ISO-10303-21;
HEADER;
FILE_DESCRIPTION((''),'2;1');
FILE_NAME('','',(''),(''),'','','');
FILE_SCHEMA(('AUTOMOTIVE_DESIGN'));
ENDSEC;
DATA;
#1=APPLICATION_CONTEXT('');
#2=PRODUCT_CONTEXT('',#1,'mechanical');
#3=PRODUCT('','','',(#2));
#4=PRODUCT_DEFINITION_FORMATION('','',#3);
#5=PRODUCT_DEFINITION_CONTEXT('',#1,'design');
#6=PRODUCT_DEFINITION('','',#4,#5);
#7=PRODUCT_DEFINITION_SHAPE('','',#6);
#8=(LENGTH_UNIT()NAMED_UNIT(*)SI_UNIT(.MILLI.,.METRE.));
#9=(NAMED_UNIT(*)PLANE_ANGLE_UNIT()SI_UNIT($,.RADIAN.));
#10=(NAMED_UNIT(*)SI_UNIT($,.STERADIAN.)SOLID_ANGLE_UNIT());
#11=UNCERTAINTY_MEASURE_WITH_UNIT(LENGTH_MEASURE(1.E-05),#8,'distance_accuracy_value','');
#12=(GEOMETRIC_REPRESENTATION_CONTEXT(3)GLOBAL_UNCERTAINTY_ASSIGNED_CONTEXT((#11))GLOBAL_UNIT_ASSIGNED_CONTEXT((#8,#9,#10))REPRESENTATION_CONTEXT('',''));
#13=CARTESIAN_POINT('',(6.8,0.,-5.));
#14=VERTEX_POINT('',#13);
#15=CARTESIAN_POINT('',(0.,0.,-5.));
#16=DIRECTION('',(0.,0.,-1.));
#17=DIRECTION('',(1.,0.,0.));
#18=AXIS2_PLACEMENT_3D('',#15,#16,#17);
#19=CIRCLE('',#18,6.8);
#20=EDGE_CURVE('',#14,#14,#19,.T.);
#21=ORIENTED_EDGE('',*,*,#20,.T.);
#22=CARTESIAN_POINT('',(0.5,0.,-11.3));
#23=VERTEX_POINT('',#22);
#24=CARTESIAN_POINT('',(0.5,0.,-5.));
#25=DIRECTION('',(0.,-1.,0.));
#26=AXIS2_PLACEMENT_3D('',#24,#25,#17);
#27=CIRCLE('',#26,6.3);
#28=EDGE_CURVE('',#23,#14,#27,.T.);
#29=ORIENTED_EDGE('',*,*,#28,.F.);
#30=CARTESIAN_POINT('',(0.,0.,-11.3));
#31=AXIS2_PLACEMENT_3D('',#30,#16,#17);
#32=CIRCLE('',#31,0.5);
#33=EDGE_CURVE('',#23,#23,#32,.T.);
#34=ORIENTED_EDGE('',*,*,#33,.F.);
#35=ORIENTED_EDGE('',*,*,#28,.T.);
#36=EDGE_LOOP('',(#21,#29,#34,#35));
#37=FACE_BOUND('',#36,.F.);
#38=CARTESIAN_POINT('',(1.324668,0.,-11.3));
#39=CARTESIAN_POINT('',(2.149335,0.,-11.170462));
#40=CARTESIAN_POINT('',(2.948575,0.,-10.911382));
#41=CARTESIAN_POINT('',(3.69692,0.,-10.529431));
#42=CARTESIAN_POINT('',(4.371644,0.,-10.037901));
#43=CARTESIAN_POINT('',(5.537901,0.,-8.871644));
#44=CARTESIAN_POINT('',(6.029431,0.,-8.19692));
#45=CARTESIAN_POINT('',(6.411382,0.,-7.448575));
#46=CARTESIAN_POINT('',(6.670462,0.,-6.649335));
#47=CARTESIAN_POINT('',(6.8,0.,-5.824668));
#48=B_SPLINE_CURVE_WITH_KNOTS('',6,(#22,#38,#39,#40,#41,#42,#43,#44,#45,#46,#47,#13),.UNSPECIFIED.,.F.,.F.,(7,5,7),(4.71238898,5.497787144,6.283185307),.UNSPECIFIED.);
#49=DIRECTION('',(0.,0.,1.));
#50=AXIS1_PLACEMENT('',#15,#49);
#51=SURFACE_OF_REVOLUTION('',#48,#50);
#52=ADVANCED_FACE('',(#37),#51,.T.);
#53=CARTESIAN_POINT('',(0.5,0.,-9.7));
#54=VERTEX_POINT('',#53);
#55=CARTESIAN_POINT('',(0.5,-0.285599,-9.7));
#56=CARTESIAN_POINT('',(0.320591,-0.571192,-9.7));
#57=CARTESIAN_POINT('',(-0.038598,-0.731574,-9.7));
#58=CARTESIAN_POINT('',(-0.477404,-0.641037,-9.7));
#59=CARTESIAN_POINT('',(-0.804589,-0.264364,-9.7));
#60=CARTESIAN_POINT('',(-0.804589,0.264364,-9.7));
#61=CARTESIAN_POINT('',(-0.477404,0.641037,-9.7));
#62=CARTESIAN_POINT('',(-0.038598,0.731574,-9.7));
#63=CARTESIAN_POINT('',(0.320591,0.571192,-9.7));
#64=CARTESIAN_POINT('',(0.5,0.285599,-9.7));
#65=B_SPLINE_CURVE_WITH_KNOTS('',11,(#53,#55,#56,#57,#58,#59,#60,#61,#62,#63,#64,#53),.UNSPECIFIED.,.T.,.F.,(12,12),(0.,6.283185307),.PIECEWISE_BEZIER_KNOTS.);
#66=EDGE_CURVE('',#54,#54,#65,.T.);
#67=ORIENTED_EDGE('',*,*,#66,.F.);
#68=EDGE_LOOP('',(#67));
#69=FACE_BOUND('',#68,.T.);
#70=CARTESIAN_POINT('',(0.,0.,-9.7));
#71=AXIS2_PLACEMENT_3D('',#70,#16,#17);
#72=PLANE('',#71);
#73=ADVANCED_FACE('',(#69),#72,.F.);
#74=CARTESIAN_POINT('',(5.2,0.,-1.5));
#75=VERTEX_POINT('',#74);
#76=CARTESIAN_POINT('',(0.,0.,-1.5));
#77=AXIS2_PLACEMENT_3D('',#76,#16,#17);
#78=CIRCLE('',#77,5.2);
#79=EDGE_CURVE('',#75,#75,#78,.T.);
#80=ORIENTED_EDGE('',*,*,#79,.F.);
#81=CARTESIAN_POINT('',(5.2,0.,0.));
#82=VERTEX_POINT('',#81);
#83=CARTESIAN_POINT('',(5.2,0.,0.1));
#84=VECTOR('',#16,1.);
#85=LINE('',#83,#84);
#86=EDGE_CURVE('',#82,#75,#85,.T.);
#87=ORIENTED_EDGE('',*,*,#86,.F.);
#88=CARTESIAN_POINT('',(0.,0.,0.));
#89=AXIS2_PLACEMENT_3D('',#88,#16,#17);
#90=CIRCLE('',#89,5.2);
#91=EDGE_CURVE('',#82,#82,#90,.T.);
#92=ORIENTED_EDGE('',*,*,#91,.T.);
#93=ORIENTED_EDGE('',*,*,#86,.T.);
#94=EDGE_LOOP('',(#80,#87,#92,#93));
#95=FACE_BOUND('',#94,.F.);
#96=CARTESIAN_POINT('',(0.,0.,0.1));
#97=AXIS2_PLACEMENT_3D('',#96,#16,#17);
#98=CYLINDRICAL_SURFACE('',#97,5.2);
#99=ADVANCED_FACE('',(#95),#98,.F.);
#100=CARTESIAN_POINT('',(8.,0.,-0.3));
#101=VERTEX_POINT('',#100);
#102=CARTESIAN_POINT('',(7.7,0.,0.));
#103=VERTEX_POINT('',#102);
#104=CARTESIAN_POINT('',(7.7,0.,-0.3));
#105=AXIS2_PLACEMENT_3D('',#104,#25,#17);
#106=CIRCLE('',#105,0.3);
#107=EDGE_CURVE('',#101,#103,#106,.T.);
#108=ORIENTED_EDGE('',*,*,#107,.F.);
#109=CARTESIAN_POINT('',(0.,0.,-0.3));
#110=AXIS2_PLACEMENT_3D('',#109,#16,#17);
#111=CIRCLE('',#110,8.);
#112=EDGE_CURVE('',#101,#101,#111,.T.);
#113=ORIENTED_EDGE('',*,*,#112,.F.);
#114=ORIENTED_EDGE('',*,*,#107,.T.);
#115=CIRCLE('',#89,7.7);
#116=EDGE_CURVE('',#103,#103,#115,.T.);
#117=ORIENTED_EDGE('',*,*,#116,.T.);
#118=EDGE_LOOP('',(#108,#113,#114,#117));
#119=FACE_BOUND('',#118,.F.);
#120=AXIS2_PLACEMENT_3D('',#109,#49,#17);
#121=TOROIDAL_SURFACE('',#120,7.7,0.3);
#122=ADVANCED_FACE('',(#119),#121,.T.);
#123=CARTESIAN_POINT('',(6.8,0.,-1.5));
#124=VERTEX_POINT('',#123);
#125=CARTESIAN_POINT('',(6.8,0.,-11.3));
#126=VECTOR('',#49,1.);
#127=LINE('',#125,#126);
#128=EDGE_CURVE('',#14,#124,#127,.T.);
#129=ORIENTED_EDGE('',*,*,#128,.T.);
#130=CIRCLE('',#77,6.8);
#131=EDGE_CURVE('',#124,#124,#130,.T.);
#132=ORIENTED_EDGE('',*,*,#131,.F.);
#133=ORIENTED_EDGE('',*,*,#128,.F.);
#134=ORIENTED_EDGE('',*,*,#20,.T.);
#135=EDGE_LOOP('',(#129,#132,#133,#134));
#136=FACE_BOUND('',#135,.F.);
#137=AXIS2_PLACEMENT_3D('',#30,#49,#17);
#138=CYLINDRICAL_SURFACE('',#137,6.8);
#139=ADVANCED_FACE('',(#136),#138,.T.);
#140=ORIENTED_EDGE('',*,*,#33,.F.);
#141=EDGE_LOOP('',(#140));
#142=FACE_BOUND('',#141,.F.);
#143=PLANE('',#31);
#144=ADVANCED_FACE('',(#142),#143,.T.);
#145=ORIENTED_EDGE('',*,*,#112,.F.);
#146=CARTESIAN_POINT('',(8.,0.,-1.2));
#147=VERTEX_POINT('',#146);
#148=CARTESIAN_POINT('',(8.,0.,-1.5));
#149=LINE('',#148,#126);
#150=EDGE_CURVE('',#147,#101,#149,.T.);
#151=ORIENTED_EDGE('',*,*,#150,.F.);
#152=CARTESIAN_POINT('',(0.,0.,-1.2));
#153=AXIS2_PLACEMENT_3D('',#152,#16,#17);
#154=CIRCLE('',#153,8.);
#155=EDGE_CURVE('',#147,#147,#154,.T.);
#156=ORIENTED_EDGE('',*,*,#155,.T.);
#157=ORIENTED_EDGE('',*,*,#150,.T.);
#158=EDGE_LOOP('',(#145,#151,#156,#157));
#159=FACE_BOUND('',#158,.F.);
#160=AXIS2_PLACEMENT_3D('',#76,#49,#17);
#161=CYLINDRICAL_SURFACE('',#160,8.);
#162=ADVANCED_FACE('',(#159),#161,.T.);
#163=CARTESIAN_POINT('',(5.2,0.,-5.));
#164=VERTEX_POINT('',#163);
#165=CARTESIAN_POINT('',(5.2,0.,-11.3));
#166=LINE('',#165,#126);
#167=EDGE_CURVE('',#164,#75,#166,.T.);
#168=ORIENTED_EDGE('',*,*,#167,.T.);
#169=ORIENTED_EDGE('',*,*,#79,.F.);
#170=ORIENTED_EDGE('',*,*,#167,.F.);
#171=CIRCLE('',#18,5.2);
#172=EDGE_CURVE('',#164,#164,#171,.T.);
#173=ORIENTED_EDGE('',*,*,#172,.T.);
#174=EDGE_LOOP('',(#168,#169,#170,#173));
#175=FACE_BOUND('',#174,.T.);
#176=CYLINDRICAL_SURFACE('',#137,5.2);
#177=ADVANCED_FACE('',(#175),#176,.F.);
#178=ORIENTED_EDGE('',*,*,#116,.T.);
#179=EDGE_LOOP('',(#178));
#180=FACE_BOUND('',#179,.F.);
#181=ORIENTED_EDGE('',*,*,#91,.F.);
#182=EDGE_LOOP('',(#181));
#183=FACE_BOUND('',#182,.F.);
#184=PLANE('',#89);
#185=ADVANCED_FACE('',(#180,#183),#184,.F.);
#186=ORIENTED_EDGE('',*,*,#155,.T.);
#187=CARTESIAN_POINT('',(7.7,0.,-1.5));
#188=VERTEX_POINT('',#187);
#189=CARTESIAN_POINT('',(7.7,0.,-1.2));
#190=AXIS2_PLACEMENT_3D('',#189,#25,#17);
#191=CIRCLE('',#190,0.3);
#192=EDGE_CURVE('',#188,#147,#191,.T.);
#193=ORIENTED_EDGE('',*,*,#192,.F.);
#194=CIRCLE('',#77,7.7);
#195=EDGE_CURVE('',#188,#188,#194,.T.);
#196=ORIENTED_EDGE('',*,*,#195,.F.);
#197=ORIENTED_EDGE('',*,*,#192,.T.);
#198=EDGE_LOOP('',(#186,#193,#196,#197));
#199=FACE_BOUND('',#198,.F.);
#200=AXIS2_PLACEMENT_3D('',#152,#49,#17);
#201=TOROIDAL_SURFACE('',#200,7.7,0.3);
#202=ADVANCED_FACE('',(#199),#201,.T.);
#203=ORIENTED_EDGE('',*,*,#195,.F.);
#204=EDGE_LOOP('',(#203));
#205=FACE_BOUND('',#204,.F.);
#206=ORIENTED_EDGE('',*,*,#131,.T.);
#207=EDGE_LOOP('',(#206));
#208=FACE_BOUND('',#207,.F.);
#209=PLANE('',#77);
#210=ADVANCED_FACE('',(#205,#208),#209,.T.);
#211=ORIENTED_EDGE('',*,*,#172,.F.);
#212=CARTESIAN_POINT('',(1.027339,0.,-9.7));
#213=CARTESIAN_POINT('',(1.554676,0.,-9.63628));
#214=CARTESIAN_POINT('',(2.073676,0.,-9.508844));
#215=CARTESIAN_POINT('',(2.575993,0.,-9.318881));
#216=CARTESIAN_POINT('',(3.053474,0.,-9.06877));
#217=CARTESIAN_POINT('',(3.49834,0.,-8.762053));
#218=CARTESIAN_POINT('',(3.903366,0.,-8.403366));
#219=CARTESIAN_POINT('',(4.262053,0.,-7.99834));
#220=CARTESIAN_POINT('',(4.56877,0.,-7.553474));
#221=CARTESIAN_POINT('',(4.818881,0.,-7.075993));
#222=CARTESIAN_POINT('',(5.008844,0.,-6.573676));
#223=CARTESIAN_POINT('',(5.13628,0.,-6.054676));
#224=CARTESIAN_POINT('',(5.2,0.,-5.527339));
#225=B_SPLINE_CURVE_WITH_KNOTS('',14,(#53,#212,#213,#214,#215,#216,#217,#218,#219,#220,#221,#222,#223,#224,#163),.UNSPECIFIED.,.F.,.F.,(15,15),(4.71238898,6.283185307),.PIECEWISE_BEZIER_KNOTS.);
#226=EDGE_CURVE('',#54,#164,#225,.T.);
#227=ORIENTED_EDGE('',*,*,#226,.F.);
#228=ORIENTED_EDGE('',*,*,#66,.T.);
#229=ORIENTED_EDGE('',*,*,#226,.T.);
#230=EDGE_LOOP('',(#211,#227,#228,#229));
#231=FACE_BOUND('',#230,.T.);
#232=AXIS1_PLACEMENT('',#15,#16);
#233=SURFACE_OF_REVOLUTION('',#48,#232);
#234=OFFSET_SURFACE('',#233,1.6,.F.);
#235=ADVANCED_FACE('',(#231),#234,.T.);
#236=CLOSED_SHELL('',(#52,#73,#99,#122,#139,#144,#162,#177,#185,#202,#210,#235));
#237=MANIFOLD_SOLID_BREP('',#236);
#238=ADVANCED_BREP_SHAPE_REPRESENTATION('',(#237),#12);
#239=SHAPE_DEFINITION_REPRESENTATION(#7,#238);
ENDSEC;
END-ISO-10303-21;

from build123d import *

# Parameters (mm, degrees)
F2_R = 6.3
F3_R = 0.3
F4_T = 1.6


# Not quite as in the source:
# - a shell that OpenCascade refuses in one call is made with other operations: the cavity is built on its own and cut out


with BuildPart() as f1:
    # F0 (on Front) → F1 (revolve)
    with BuildSketch(Plane.XZ):
        Polygon((8, 0), (0, 0), (0, -11.3), (6.8, -11.3), (6.8, -1.5), (8, -1.5), align=None)
    revolve(axis=Axis((0, 0, -5.65), (0, 0, -1)))

    # F2
    f2_edges = [f1.edges().sort_by_distance(p)[0] for p in [
        (-6.8, 0, -11.3),
    ]]
    fillet(f2_edges, radius=F2_R)

    # F3
    f3_edges = [f1.edges().sort_by_distance(p)[0] for p in [
        (-8, 0, -1.5),
        (-8, 0, 0),
        (8, 0, -0.75),
    ]]
    fillet(f3_edges, radius=F3_R)

    # F4: shell of thickness 1.6, made by hand


with BuildPart() as f4_core1:
    # F4_t2: copy of F1
    add(f1.part)

    # the walls: a layer under each face that stays
    f4_faces = [f4_core1.faces().sort_by_distance(p)[0] for p in [
        (5.1333333333, 5.1333333333, -1.5),
        (-6.8, 0, -3.25),
        (-8, 0, -0.75),
        (-4.9547727215, 0, -9.4547727215),
        (0, 0, -11.3),
    ]]
    thicken(f4_faces, amount=-F4_T, mode=Mode.SUBTRACT)

    # F4_s3 → F4_t4 (revolve, cut)
    with BuildSketch(Plane.XZ):
        Polygon((6.816, -1.516), (6.8, 0.1), (5.2, 0.1), (5.2, -1.5), align=None)
    revolve(axis=Axis((0, 0, -1.5), (0, 0, -1)), mode=Mode.SUBTRACT)


with BuildPart() as f1_1:
    add(f1.part)

    # what is left inside the walls is the cavity
    f4_cavity = [f4_core1.part.solids().sort_by_distance(p)[0] for p in [
        (-2.842, 0, -9.056463),
    ]]
    add(f4_cavity, mode=Mode.SUBTRACT)


solid = f1_1.part
